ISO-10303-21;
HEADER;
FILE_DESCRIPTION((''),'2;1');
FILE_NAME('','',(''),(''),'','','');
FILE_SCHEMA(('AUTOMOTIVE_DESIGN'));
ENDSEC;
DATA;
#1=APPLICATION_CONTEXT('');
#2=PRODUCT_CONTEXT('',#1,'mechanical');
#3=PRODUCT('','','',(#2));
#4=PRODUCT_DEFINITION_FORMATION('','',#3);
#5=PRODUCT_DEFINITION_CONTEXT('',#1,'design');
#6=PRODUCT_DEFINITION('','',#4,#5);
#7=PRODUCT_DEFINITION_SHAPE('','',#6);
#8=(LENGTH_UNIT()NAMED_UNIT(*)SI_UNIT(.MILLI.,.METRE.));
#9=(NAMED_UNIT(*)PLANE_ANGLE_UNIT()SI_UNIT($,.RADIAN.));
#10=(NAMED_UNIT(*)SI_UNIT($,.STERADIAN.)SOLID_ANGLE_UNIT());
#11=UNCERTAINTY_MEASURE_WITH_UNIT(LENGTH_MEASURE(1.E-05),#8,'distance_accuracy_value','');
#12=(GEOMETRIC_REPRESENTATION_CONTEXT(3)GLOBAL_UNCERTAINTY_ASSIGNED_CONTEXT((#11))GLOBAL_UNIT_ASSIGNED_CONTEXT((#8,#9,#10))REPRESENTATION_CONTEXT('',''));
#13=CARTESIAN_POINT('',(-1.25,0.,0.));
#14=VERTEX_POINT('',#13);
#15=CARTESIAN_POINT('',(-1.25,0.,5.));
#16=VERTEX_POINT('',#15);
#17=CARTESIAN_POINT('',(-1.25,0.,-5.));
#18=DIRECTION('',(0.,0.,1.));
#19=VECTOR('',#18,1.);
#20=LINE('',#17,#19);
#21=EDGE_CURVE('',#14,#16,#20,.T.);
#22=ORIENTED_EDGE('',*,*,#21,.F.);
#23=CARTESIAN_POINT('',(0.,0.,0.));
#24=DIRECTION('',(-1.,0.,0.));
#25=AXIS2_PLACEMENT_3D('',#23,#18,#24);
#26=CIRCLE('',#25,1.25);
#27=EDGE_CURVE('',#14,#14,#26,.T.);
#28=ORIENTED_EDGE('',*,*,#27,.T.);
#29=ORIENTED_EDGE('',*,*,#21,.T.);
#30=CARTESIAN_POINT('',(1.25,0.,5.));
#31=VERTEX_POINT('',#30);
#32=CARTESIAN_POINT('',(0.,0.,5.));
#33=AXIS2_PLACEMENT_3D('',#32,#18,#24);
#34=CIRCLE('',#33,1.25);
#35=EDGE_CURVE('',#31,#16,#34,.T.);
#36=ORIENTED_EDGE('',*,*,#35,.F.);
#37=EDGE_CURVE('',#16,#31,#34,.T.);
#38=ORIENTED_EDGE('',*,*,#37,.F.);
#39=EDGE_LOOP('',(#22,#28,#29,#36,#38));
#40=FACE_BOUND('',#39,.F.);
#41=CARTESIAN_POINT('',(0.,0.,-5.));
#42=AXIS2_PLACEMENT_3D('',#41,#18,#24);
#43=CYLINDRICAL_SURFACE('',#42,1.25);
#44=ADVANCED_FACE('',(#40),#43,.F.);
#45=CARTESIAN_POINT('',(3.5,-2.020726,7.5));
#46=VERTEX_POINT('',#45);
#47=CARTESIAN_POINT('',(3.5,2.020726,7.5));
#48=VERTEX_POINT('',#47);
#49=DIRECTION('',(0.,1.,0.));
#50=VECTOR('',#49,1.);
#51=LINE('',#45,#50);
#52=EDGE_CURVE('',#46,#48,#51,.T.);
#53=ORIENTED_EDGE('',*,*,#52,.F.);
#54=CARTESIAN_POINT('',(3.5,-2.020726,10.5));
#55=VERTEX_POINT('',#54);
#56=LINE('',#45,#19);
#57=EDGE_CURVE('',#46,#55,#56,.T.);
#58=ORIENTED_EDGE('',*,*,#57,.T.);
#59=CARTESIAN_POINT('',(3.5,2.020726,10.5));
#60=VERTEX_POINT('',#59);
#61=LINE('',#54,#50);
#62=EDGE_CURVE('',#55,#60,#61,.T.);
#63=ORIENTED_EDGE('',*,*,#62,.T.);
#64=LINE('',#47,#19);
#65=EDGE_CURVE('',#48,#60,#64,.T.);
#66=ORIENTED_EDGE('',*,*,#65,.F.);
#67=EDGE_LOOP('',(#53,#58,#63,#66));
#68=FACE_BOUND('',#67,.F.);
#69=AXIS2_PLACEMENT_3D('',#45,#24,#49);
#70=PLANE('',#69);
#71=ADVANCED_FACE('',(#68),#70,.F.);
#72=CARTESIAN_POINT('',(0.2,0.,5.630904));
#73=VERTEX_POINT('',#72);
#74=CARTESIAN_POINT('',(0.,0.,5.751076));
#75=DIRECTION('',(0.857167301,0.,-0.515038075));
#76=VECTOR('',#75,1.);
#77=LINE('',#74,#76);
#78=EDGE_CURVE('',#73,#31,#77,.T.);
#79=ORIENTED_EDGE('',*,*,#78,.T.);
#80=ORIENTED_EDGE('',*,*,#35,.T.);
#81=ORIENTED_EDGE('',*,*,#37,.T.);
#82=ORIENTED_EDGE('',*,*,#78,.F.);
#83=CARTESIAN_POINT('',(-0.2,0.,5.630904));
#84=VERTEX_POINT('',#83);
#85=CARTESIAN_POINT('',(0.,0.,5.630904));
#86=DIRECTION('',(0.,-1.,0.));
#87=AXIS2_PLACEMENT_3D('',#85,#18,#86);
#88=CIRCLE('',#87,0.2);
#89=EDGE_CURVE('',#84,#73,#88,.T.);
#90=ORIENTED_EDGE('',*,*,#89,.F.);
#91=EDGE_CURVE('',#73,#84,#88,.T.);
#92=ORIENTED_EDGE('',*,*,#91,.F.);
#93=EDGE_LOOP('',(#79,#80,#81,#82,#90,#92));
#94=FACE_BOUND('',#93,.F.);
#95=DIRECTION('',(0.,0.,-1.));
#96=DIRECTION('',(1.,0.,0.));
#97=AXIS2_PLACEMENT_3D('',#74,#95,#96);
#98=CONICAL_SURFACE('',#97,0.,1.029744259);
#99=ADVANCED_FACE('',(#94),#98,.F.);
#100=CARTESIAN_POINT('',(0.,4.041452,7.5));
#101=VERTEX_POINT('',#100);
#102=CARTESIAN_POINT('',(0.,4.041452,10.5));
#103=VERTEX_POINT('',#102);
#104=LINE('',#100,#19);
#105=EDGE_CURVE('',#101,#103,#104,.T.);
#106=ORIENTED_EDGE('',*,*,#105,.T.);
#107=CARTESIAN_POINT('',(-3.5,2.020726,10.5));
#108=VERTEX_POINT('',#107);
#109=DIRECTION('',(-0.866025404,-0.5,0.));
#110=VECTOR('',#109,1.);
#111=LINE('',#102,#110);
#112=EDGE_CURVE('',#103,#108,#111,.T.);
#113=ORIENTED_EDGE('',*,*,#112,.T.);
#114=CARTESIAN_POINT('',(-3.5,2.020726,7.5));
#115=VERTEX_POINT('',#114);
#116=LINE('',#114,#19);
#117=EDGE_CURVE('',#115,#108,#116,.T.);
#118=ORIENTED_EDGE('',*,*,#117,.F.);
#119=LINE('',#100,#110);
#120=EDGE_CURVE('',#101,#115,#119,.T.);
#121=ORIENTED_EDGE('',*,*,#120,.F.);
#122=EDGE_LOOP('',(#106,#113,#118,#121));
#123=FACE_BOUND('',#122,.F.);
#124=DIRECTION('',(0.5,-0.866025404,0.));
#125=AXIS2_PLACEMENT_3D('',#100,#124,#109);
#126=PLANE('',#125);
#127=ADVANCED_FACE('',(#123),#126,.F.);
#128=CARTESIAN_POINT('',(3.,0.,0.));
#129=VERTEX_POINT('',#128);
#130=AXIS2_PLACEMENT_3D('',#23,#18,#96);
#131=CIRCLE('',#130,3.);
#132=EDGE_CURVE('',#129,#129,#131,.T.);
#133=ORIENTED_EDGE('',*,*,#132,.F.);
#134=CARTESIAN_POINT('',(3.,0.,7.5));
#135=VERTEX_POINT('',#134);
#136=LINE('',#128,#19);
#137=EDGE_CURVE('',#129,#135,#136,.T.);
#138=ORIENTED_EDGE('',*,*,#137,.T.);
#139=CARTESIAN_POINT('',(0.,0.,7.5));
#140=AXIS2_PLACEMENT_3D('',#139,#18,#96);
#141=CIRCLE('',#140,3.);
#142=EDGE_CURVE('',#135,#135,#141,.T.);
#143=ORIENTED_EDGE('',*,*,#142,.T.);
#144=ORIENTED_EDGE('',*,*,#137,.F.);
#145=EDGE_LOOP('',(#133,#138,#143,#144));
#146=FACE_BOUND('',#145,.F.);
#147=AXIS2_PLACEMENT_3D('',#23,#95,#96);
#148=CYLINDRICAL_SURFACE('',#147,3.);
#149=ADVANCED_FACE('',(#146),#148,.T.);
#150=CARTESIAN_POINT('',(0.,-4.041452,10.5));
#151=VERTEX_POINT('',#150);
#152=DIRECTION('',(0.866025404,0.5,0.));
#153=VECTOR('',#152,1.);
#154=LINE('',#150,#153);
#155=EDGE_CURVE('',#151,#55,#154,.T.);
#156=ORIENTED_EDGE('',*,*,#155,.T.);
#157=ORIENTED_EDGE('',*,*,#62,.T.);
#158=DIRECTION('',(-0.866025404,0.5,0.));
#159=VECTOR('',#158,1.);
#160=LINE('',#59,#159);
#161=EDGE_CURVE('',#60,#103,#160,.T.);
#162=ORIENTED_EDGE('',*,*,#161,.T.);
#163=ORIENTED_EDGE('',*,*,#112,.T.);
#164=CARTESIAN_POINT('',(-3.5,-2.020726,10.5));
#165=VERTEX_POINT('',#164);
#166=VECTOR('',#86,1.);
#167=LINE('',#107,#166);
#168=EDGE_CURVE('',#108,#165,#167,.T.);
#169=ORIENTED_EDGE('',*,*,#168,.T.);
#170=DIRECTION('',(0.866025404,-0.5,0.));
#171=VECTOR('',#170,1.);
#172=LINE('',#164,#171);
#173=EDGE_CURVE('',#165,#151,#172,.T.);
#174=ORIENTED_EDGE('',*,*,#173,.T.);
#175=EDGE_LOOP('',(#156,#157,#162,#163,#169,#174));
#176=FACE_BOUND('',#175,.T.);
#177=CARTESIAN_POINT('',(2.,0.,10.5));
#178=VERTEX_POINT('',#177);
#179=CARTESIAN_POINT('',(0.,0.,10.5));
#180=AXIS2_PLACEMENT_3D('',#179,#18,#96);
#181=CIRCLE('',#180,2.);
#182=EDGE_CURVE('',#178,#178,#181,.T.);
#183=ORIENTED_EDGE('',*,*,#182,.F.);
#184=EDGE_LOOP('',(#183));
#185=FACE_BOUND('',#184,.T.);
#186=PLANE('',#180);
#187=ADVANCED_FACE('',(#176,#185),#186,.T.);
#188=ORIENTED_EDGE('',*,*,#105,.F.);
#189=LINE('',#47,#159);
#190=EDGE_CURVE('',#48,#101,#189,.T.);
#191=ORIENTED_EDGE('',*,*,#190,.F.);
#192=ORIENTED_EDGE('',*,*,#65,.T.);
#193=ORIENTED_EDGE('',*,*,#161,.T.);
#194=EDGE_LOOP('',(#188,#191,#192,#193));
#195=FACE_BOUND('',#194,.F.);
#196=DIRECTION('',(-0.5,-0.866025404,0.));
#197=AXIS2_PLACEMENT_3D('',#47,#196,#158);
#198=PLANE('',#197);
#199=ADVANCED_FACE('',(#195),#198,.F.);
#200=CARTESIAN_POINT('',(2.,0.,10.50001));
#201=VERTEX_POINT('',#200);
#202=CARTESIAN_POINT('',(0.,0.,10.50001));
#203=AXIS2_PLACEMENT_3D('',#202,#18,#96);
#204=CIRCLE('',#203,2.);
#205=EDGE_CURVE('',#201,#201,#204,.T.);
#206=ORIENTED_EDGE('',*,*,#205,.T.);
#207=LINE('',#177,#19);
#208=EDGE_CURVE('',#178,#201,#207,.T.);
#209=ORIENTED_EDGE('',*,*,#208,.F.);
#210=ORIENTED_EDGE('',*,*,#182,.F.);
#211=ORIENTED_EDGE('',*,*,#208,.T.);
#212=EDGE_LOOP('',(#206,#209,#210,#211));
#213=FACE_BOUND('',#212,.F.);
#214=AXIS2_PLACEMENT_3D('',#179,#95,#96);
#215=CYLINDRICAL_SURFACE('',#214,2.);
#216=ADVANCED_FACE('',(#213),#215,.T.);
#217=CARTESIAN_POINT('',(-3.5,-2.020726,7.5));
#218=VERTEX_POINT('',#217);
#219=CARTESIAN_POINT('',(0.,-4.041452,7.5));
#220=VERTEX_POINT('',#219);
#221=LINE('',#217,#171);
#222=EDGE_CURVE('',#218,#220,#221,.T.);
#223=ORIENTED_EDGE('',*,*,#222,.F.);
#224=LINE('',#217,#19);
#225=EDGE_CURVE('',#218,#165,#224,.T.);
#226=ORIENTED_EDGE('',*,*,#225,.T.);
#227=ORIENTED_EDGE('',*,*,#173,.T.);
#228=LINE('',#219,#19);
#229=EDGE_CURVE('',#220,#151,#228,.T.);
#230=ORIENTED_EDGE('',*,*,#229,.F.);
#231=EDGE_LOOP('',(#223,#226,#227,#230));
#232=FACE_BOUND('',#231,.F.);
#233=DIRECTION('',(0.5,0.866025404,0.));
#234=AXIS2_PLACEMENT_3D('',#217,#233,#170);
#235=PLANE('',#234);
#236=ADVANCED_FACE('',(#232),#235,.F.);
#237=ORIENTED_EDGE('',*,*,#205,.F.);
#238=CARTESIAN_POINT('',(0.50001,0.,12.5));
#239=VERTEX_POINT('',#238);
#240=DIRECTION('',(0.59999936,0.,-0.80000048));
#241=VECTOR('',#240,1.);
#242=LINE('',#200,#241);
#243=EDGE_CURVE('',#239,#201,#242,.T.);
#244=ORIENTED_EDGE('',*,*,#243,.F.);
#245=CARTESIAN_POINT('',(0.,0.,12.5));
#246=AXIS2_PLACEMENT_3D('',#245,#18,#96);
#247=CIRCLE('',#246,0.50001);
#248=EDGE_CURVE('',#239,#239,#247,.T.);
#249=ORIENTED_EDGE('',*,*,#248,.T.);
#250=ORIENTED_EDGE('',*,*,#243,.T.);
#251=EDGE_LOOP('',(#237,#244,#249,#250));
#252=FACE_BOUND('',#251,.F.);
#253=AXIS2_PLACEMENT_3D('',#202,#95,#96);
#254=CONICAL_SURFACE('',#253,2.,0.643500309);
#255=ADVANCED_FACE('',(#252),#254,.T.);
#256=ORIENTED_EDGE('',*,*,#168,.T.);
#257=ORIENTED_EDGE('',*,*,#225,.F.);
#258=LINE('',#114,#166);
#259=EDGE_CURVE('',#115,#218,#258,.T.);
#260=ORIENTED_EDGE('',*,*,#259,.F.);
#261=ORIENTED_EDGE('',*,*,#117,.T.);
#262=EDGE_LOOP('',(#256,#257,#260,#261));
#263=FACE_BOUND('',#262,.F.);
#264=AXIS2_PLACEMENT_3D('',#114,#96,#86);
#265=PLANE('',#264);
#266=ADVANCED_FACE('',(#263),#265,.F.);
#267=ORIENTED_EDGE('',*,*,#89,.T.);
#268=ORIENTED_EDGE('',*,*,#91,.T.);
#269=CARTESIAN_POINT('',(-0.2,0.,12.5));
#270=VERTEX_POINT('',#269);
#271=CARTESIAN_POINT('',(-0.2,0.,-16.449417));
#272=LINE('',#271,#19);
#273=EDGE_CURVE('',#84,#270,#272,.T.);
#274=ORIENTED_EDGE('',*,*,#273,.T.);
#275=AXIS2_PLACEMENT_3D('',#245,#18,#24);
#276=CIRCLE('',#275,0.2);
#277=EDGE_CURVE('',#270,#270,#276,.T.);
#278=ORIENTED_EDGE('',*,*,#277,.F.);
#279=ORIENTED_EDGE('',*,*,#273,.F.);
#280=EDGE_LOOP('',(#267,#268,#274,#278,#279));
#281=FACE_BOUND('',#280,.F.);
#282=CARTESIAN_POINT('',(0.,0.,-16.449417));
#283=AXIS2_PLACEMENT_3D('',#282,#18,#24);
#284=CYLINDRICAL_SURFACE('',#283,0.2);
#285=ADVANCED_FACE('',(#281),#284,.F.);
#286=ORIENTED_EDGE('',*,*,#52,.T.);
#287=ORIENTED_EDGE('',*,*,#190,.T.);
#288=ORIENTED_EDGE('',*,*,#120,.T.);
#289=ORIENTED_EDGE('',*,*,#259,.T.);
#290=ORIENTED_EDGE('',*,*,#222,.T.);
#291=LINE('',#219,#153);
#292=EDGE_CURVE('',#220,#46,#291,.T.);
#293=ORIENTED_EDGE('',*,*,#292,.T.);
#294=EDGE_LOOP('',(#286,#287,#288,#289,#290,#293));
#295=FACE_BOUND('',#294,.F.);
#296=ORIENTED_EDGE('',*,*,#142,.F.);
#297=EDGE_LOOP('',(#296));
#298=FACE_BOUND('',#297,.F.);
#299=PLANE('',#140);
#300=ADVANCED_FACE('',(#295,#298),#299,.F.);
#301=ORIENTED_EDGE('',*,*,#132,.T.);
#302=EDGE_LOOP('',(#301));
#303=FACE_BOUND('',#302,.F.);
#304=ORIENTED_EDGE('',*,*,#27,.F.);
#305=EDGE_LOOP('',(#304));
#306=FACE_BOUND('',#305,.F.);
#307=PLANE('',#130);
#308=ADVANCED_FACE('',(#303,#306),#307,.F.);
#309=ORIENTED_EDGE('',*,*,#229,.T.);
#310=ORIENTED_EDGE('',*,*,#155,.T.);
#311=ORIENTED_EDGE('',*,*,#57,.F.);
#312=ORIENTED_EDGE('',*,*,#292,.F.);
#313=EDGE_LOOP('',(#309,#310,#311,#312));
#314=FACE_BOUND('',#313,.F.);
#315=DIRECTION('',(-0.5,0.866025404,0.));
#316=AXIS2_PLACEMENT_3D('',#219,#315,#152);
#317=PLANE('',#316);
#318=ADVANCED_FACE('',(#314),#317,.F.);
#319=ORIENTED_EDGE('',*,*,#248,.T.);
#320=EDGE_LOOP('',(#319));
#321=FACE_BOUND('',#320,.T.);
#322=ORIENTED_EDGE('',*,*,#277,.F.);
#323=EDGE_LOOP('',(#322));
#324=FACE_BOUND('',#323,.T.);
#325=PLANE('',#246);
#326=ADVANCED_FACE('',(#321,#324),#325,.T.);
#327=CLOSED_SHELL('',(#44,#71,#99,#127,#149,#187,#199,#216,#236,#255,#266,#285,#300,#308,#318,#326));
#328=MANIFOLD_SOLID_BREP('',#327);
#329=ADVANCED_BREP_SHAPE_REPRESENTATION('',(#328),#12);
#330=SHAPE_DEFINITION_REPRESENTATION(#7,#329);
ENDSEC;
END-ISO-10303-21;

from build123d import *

# Parameters (mm, degrees)
F1_R      = 3
F2_DEPTH  = 7.5
F3_R      = 3
F4_DEPTH  = 3
F5_R      = 2
F6_DEPTH  = 2
F7_SIZE2  = 1.99999
F7_SIZE   = 1.49999
F8_D      = 0.4
F10_D     = 2.5
F10_DEPTH = 5
F10_TIP   = 0.7510757738


# Not quite as in the source:
# - a fillet or chamfer is up to 0.001 mm smaller than in the source, because OpenCascade refuses the exact size


with BuildPart() as f2:
    # F1 (on face) → F2 (new body)
    with BuildSketch(Plane.XY):
        Circle(F1_R)
    extrude(amount=F2_DEPTH)

    # F3 (on face) → F4 (join)
    with BuildSketch(Plane.XY.offset(7.5)):
        Polygon((3.5, -2.0207259422), (3.5, 2.0207259422), (0, 4.0414518843), (-3.5, 2.0207259422), (-3.5, -2.0207259422), (0, -4.0414518843), align=None)
        Circle(F3_R, mode=Mode.SUBTRACT)
        Circle(F3_R)
    extrude(amount=F4_DEPTH)

    # F5 (on face) → F6 (join)
    with BuildSketch(Plane.XY.offset(10.5)):
        Circle(F5_R)
    extrude(amount=F6_DEPTH)

    # F7 (size 1.5 and 2 in the source; OpenCascade refuses exactly that, so slightly less here)
    f7_edges = [f2.edges().sort_by_distance(p)[0] for p in [
        (-2, 0, 12.5),
    ]]
    f7_side = f2.faces().sort_by_distance((0, 0, 12.5))[0]
    chamfer(f7_edges, length=F7_SIZE, length2=F7_SIZE2, reference=f7_side)

    # F8 (through all)
    with Locations(Plane(origin=(0, 0, 0), x_dir=(1, 0, 0), z_dir=(0, 0, -1))):
        with Locations((0, 0)):
            Hole(F8_D / 2)

    # F10
    with Locations(Plane(origin=(0, 0, 0), x_dir=(1, 0, 0), z_dir=(0, 0, -1))):
        with Locations((0, 0)):
            Hole(F10_D / 2, depth=F10_DEPTH)
            with Locations((0, 0, -(F10_DEPTH + F10_TIP / 2))):  # 118° drill point
                Cone(0, F10_D / 2, F10_TIP, mode=Mode.SUBTRACT)


solid = f2.part
